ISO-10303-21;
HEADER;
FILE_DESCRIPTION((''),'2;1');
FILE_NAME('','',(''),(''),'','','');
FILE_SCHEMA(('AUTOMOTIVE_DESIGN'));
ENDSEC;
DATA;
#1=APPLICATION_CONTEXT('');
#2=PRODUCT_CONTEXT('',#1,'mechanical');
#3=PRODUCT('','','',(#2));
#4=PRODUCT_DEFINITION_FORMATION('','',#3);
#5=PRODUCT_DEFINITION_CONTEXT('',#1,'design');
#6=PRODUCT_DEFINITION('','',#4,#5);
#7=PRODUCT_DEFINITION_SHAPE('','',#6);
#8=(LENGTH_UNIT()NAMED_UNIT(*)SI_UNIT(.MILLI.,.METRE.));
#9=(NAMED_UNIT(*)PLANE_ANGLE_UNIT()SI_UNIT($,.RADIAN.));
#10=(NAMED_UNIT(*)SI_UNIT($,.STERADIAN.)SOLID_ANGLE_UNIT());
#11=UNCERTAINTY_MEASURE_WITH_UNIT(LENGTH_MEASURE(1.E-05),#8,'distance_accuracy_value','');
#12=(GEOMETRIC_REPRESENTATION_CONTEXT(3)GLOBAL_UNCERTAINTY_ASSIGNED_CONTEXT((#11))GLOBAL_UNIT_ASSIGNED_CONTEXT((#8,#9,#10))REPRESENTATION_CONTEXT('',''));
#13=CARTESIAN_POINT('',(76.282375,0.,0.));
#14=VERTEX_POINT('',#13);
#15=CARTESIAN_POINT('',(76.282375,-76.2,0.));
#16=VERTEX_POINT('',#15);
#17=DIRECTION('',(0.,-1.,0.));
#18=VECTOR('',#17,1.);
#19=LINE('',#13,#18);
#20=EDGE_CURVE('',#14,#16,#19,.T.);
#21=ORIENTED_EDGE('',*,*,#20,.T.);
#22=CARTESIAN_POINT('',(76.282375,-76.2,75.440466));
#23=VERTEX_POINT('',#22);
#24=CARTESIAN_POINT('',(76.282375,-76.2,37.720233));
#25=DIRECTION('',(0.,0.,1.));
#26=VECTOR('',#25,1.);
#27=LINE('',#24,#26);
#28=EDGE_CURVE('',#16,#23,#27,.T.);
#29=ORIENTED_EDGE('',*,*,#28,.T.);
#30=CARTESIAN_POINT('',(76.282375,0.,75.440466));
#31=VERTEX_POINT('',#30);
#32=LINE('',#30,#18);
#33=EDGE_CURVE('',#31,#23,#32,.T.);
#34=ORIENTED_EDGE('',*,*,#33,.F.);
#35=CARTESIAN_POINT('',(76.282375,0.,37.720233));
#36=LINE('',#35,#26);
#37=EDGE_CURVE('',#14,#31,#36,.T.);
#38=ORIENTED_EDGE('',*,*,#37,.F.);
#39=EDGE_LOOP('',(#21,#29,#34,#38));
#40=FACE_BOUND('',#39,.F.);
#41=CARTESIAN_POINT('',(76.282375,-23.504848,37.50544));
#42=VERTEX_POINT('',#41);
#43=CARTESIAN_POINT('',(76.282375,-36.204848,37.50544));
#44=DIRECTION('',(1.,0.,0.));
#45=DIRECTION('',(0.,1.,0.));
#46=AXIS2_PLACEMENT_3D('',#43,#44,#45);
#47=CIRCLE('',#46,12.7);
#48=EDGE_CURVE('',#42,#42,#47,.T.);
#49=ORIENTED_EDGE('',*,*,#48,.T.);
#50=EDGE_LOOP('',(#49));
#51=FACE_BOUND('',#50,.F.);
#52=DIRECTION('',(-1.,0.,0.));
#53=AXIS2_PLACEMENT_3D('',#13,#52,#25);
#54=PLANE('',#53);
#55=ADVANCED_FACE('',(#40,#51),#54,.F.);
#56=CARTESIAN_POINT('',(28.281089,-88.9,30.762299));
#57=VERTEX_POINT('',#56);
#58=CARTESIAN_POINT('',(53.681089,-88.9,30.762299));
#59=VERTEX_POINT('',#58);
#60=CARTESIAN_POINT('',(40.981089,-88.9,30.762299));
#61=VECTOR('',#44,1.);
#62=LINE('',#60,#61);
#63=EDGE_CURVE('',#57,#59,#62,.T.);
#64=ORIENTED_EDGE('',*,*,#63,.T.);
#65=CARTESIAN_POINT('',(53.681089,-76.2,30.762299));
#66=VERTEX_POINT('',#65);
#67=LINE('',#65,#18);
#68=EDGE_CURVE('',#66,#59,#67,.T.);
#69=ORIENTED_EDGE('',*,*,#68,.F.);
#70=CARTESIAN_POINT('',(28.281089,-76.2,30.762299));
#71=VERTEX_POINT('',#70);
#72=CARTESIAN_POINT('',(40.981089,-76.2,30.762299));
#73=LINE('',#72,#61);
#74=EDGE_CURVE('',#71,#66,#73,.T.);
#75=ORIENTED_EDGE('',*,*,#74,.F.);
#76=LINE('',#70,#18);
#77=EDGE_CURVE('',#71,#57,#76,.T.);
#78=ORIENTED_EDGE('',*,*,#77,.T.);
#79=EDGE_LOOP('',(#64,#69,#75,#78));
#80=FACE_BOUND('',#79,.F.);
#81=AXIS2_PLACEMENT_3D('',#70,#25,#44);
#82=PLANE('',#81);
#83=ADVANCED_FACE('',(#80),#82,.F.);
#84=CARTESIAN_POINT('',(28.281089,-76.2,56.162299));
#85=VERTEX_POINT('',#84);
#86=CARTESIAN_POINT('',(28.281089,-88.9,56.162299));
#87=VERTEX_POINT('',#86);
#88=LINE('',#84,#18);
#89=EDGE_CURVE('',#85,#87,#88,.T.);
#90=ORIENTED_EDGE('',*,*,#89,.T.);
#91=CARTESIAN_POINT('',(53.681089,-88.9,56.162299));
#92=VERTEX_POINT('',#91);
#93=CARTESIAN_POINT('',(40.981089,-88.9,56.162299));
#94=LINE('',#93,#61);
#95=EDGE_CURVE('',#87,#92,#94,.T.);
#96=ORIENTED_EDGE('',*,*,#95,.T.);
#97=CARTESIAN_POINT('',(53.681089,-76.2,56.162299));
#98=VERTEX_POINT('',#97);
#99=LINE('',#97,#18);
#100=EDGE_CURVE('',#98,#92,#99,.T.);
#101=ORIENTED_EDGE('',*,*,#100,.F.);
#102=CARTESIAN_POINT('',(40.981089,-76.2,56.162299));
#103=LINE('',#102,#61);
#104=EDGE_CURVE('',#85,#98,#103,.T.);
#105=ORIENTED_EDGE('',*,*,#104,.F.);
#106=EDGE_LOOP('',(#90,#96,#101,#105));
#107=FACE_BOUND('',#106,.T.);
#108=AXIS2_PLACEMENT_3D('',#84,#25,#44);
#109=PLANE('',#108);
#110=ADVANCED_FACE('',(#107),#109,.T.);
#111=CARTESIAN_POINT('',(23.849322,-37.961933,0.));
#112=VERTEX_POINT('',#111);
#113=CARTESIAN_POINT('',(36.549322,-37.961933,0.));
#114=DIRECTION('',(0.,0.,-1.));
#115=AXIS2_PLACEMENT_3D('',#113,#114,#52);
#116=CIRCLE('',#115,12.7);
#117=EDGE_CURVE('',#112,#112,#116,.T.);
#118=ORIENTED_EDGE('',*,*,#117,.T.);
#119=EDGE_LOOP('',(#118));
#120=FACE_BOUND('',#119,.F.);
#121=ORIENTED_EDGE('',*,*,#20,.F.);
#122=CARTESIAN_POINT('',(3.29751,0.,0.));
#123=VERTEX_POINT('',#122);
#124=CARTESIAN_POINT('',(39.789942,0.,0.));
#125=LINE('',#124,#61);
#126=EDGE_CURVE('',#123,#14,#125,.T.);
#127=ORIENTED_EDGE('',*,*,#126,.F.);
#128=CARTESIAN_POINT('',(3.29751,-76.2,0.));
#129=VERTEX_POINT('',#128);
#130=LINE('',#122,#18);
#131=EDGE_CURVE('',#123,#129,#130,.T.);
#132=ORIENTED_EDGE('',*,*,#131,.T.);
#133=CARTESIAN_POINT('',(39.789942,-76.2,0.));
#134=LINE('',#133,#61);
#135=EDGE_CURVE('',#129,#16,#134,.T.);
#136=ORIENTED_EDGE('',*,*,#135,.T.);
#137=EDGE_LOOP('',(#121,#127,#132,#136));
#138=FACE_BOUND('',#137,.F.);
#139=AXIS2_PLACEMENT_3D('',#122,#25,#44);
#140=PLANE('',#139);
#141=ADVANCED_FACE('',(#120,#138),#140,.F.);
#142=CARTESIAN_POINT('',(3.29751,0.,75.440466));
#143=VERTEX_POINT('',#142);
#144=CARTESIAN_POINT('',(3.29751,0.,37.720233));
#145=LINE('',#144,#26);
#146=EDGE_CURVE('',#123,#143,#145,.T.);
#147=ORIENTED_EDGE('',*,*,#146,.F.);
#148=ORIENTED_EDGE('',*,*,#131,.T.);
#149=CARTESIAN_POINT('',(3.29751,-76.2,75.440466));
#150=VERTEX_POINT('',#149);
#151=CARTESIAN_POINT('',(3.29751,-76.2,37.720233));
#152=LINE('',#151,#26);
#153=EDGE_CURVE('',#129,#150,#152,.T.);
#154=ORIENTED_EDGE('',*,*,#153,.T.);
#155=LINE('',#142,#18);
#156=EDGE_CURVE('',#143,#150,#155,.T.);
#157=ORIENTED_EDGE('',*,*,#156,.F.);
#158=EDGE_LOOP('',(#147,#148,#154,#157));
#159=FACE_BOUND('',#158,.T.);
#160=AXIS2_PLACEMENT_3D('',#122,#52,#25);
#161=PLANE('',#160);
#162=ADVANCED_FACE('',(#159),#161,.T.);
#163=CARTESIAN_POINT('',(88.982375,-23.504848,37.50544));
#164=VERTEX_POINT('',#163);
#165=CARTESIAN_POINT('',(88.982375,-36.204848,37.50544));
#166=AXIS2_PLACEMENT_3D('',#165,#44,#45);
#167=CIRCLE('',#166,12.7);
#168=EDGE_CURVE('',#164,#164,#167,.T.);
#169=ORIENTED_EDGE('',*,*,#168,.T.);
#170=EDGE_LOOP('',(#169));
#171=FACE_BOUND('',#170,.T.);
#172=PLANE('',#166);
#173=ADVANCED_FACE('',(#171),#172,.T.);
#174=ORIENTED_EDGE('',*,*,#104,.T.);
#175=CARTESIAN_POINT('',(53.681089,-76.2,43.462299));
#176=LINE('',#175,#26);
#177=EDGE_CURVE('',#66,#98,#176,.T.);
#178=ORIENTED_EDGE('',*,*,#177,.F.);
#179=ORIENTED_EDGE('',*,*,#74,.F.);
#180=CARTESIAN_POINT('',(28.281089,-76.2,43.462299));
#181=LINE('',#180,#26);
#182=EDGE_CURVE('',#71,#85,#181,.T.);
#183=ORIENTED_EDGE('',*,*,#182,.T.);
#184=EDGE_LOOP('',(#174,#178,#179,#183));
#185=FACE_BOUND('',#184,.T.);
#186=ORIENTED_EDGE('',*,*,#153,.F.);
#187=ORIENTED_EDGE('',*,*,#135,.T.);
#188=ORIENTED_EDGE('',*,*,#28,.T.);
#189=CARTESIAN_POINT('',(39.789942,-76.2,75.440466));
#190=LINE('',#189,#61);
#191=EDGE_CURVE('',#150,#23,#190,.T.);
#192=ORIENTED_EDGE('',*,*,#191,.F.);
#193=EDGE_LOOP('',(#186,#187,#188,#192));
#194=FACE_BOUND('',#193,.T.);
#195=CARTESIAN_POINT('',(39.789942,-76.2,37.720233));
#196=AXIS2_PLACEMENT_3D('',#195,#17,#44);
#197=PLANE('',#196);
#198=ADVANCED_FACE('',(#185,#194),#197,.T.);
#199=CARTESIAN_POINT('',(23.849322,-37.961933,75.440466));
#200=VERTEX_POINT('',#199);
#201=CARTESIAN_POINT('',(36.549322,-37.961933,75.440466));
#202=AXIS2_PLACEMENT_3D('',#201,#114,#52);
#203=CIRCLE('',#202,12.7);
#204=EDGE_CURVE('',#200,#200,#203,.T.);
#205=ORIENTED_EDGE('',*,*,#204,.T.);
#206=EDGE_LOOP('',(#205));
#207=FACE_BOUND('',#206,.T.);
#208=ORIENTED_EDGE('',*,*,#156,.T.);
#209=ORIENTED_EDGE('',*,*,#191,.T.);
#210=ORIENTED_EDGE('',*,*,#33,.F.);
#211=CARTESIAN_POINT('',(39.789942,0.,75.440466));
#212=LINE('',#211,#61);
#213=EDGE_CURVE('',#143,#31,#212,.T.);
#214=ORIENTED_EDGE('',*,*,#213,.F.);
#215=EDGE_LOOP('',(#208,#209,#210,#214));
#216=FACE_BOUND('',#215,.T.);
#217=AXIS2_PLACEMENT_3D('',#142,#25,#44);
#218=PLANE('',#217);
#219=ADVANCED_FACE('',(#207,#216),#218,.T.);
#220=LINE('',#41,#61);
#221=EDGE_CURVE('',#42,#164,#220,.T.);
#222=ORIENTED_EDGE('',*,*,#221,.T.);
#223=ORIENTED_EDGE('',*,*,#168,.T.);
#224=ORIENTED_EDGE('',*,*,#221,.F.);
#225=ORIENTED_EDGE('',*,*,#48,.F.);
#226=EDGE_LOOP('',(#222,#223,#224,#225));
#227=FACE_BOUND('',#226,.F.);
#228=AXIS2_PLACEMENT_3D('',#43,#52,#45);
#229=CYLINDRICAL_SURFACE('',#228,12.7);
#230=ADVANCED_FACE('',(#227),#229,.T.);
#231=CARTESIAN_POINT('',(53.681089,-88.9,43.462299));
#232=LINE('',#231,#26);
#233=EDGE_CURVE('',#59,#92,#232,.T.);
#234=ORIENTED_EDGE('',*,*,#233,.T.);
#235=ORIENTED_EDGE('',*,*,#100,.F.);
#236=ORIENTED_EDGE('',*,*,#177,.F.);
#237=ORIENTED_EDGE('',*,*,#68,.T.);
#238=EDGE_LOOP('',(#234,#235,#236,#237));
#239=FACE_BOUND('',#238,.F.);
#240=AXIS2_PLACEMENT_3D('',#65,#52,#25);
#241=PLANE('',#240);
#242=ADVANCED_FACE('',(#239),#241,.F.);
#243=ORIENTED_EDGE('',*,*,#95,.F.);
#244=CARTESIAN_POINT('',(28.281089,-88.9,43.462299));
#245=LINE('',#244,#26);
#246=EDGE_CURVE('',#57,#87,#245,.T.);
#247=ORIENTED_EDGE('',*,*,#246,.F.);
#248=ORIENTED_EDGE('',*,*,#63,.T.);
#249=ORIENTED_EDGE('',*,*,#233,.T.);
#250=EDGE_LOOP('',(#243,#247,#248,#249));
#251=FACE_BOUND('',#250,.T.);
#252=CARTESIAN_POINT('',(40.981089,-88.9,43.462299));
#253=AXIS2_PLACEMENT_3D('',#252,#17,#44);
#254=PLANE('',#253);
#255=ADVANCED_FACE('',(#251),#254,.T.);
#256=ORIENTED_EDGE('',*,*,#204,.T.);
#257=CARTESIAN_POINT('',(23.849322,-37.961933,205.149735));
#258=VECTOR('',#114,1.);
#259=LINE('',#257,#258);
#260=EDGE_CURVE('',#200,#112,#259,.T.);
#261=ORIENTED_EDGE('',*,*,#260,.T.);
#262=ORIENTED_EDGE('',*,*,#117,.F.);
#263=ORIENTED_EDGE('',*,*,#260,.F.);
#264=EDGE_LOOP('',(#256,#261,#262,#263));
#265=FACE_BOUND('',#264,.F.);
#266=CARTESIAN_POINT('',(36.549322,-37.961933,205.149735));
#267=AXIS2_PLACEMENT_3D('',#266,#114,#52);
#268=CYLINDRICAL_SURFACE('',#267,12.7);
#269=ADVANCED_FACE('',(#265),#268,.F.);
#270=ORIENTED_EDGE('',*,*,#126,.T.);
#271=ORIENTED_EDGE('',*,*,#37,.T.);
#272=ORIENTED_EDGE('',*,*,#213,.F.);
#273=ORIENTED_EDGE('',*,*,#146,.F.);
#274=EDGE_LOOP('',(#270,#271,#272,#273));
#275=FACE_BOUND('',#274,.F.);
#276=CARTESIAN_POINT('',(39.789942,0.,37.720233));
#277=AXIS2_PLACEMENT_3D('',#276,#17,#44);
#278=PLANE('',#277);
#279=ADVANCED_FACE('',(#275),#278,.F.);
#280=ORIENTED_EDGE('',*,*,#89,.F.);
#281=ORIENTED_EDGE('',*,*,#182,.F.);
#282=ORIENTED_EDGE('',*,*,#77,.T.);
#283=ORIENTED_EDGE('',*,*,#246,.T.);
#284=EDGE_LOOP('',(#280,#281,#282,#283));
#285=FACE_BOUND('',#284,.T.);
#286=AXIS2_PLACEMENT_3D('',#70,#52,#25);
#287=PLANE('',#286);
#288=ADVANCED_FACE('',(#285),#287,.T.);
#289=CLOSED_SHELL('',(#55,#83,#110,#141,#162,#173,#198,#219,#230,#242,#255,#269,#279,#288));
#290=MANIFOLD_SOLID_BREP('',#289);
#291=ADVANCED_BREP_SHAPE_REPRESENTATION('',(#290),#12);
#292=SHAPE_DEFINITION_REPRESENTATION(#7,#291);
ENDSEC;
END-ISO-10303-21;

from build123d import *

# Parameters (mm, degrees)
F0_W     = 72.9848642368
F0_H     = 75.440466404
F1_DEPTH = 76.2
F3_D     = 25.4
F4_W     = 25.4
F4_H     = 25.4
F5_DEPTH = 12.7
F7_R     = 12.7
F8_DEPTH = 12.7


# Not quite as in the source:
# - a length typed as a fraction of an inch, garbled in the dataset ("3 / 203.2 mm" for 3/8 in), is restored


with BuildPart() as f1:
    # F0 (on Front) → F1 (new body)
    with BuildSketch(Plane.XZ):
        with Locations((39.7899424424, 37.720233202)):
            Rectangle(F0_W, F0_H)
    extrude(amount=F1_DEPTH)

    # F3 (through all)
    with Locations(Plane.XY.offset(75.440466404)):
        with Locations((36.5493223071, -37.9619333167)):
            Hole(F3_D / 2)

    # F4 (on face) → F5 (join)
    with BuildSketch(Plane.XZ.offset(76.2)):
        with Locations((40.9810889382, 43.4622988105)):
            Rectangle(F4_W, F4_H)
    extrude(amount=F5_DEPTH)

    # F7 (on face) → F8 (join)
    with BuildSketch(Plane.YZ.offset(76.2823745608)):
        with Locations((-36.2048484385, 37.505440414)):
            Circle(F7_R)
    extrude(amount=F8_DEPTH)


solid = f1.part
